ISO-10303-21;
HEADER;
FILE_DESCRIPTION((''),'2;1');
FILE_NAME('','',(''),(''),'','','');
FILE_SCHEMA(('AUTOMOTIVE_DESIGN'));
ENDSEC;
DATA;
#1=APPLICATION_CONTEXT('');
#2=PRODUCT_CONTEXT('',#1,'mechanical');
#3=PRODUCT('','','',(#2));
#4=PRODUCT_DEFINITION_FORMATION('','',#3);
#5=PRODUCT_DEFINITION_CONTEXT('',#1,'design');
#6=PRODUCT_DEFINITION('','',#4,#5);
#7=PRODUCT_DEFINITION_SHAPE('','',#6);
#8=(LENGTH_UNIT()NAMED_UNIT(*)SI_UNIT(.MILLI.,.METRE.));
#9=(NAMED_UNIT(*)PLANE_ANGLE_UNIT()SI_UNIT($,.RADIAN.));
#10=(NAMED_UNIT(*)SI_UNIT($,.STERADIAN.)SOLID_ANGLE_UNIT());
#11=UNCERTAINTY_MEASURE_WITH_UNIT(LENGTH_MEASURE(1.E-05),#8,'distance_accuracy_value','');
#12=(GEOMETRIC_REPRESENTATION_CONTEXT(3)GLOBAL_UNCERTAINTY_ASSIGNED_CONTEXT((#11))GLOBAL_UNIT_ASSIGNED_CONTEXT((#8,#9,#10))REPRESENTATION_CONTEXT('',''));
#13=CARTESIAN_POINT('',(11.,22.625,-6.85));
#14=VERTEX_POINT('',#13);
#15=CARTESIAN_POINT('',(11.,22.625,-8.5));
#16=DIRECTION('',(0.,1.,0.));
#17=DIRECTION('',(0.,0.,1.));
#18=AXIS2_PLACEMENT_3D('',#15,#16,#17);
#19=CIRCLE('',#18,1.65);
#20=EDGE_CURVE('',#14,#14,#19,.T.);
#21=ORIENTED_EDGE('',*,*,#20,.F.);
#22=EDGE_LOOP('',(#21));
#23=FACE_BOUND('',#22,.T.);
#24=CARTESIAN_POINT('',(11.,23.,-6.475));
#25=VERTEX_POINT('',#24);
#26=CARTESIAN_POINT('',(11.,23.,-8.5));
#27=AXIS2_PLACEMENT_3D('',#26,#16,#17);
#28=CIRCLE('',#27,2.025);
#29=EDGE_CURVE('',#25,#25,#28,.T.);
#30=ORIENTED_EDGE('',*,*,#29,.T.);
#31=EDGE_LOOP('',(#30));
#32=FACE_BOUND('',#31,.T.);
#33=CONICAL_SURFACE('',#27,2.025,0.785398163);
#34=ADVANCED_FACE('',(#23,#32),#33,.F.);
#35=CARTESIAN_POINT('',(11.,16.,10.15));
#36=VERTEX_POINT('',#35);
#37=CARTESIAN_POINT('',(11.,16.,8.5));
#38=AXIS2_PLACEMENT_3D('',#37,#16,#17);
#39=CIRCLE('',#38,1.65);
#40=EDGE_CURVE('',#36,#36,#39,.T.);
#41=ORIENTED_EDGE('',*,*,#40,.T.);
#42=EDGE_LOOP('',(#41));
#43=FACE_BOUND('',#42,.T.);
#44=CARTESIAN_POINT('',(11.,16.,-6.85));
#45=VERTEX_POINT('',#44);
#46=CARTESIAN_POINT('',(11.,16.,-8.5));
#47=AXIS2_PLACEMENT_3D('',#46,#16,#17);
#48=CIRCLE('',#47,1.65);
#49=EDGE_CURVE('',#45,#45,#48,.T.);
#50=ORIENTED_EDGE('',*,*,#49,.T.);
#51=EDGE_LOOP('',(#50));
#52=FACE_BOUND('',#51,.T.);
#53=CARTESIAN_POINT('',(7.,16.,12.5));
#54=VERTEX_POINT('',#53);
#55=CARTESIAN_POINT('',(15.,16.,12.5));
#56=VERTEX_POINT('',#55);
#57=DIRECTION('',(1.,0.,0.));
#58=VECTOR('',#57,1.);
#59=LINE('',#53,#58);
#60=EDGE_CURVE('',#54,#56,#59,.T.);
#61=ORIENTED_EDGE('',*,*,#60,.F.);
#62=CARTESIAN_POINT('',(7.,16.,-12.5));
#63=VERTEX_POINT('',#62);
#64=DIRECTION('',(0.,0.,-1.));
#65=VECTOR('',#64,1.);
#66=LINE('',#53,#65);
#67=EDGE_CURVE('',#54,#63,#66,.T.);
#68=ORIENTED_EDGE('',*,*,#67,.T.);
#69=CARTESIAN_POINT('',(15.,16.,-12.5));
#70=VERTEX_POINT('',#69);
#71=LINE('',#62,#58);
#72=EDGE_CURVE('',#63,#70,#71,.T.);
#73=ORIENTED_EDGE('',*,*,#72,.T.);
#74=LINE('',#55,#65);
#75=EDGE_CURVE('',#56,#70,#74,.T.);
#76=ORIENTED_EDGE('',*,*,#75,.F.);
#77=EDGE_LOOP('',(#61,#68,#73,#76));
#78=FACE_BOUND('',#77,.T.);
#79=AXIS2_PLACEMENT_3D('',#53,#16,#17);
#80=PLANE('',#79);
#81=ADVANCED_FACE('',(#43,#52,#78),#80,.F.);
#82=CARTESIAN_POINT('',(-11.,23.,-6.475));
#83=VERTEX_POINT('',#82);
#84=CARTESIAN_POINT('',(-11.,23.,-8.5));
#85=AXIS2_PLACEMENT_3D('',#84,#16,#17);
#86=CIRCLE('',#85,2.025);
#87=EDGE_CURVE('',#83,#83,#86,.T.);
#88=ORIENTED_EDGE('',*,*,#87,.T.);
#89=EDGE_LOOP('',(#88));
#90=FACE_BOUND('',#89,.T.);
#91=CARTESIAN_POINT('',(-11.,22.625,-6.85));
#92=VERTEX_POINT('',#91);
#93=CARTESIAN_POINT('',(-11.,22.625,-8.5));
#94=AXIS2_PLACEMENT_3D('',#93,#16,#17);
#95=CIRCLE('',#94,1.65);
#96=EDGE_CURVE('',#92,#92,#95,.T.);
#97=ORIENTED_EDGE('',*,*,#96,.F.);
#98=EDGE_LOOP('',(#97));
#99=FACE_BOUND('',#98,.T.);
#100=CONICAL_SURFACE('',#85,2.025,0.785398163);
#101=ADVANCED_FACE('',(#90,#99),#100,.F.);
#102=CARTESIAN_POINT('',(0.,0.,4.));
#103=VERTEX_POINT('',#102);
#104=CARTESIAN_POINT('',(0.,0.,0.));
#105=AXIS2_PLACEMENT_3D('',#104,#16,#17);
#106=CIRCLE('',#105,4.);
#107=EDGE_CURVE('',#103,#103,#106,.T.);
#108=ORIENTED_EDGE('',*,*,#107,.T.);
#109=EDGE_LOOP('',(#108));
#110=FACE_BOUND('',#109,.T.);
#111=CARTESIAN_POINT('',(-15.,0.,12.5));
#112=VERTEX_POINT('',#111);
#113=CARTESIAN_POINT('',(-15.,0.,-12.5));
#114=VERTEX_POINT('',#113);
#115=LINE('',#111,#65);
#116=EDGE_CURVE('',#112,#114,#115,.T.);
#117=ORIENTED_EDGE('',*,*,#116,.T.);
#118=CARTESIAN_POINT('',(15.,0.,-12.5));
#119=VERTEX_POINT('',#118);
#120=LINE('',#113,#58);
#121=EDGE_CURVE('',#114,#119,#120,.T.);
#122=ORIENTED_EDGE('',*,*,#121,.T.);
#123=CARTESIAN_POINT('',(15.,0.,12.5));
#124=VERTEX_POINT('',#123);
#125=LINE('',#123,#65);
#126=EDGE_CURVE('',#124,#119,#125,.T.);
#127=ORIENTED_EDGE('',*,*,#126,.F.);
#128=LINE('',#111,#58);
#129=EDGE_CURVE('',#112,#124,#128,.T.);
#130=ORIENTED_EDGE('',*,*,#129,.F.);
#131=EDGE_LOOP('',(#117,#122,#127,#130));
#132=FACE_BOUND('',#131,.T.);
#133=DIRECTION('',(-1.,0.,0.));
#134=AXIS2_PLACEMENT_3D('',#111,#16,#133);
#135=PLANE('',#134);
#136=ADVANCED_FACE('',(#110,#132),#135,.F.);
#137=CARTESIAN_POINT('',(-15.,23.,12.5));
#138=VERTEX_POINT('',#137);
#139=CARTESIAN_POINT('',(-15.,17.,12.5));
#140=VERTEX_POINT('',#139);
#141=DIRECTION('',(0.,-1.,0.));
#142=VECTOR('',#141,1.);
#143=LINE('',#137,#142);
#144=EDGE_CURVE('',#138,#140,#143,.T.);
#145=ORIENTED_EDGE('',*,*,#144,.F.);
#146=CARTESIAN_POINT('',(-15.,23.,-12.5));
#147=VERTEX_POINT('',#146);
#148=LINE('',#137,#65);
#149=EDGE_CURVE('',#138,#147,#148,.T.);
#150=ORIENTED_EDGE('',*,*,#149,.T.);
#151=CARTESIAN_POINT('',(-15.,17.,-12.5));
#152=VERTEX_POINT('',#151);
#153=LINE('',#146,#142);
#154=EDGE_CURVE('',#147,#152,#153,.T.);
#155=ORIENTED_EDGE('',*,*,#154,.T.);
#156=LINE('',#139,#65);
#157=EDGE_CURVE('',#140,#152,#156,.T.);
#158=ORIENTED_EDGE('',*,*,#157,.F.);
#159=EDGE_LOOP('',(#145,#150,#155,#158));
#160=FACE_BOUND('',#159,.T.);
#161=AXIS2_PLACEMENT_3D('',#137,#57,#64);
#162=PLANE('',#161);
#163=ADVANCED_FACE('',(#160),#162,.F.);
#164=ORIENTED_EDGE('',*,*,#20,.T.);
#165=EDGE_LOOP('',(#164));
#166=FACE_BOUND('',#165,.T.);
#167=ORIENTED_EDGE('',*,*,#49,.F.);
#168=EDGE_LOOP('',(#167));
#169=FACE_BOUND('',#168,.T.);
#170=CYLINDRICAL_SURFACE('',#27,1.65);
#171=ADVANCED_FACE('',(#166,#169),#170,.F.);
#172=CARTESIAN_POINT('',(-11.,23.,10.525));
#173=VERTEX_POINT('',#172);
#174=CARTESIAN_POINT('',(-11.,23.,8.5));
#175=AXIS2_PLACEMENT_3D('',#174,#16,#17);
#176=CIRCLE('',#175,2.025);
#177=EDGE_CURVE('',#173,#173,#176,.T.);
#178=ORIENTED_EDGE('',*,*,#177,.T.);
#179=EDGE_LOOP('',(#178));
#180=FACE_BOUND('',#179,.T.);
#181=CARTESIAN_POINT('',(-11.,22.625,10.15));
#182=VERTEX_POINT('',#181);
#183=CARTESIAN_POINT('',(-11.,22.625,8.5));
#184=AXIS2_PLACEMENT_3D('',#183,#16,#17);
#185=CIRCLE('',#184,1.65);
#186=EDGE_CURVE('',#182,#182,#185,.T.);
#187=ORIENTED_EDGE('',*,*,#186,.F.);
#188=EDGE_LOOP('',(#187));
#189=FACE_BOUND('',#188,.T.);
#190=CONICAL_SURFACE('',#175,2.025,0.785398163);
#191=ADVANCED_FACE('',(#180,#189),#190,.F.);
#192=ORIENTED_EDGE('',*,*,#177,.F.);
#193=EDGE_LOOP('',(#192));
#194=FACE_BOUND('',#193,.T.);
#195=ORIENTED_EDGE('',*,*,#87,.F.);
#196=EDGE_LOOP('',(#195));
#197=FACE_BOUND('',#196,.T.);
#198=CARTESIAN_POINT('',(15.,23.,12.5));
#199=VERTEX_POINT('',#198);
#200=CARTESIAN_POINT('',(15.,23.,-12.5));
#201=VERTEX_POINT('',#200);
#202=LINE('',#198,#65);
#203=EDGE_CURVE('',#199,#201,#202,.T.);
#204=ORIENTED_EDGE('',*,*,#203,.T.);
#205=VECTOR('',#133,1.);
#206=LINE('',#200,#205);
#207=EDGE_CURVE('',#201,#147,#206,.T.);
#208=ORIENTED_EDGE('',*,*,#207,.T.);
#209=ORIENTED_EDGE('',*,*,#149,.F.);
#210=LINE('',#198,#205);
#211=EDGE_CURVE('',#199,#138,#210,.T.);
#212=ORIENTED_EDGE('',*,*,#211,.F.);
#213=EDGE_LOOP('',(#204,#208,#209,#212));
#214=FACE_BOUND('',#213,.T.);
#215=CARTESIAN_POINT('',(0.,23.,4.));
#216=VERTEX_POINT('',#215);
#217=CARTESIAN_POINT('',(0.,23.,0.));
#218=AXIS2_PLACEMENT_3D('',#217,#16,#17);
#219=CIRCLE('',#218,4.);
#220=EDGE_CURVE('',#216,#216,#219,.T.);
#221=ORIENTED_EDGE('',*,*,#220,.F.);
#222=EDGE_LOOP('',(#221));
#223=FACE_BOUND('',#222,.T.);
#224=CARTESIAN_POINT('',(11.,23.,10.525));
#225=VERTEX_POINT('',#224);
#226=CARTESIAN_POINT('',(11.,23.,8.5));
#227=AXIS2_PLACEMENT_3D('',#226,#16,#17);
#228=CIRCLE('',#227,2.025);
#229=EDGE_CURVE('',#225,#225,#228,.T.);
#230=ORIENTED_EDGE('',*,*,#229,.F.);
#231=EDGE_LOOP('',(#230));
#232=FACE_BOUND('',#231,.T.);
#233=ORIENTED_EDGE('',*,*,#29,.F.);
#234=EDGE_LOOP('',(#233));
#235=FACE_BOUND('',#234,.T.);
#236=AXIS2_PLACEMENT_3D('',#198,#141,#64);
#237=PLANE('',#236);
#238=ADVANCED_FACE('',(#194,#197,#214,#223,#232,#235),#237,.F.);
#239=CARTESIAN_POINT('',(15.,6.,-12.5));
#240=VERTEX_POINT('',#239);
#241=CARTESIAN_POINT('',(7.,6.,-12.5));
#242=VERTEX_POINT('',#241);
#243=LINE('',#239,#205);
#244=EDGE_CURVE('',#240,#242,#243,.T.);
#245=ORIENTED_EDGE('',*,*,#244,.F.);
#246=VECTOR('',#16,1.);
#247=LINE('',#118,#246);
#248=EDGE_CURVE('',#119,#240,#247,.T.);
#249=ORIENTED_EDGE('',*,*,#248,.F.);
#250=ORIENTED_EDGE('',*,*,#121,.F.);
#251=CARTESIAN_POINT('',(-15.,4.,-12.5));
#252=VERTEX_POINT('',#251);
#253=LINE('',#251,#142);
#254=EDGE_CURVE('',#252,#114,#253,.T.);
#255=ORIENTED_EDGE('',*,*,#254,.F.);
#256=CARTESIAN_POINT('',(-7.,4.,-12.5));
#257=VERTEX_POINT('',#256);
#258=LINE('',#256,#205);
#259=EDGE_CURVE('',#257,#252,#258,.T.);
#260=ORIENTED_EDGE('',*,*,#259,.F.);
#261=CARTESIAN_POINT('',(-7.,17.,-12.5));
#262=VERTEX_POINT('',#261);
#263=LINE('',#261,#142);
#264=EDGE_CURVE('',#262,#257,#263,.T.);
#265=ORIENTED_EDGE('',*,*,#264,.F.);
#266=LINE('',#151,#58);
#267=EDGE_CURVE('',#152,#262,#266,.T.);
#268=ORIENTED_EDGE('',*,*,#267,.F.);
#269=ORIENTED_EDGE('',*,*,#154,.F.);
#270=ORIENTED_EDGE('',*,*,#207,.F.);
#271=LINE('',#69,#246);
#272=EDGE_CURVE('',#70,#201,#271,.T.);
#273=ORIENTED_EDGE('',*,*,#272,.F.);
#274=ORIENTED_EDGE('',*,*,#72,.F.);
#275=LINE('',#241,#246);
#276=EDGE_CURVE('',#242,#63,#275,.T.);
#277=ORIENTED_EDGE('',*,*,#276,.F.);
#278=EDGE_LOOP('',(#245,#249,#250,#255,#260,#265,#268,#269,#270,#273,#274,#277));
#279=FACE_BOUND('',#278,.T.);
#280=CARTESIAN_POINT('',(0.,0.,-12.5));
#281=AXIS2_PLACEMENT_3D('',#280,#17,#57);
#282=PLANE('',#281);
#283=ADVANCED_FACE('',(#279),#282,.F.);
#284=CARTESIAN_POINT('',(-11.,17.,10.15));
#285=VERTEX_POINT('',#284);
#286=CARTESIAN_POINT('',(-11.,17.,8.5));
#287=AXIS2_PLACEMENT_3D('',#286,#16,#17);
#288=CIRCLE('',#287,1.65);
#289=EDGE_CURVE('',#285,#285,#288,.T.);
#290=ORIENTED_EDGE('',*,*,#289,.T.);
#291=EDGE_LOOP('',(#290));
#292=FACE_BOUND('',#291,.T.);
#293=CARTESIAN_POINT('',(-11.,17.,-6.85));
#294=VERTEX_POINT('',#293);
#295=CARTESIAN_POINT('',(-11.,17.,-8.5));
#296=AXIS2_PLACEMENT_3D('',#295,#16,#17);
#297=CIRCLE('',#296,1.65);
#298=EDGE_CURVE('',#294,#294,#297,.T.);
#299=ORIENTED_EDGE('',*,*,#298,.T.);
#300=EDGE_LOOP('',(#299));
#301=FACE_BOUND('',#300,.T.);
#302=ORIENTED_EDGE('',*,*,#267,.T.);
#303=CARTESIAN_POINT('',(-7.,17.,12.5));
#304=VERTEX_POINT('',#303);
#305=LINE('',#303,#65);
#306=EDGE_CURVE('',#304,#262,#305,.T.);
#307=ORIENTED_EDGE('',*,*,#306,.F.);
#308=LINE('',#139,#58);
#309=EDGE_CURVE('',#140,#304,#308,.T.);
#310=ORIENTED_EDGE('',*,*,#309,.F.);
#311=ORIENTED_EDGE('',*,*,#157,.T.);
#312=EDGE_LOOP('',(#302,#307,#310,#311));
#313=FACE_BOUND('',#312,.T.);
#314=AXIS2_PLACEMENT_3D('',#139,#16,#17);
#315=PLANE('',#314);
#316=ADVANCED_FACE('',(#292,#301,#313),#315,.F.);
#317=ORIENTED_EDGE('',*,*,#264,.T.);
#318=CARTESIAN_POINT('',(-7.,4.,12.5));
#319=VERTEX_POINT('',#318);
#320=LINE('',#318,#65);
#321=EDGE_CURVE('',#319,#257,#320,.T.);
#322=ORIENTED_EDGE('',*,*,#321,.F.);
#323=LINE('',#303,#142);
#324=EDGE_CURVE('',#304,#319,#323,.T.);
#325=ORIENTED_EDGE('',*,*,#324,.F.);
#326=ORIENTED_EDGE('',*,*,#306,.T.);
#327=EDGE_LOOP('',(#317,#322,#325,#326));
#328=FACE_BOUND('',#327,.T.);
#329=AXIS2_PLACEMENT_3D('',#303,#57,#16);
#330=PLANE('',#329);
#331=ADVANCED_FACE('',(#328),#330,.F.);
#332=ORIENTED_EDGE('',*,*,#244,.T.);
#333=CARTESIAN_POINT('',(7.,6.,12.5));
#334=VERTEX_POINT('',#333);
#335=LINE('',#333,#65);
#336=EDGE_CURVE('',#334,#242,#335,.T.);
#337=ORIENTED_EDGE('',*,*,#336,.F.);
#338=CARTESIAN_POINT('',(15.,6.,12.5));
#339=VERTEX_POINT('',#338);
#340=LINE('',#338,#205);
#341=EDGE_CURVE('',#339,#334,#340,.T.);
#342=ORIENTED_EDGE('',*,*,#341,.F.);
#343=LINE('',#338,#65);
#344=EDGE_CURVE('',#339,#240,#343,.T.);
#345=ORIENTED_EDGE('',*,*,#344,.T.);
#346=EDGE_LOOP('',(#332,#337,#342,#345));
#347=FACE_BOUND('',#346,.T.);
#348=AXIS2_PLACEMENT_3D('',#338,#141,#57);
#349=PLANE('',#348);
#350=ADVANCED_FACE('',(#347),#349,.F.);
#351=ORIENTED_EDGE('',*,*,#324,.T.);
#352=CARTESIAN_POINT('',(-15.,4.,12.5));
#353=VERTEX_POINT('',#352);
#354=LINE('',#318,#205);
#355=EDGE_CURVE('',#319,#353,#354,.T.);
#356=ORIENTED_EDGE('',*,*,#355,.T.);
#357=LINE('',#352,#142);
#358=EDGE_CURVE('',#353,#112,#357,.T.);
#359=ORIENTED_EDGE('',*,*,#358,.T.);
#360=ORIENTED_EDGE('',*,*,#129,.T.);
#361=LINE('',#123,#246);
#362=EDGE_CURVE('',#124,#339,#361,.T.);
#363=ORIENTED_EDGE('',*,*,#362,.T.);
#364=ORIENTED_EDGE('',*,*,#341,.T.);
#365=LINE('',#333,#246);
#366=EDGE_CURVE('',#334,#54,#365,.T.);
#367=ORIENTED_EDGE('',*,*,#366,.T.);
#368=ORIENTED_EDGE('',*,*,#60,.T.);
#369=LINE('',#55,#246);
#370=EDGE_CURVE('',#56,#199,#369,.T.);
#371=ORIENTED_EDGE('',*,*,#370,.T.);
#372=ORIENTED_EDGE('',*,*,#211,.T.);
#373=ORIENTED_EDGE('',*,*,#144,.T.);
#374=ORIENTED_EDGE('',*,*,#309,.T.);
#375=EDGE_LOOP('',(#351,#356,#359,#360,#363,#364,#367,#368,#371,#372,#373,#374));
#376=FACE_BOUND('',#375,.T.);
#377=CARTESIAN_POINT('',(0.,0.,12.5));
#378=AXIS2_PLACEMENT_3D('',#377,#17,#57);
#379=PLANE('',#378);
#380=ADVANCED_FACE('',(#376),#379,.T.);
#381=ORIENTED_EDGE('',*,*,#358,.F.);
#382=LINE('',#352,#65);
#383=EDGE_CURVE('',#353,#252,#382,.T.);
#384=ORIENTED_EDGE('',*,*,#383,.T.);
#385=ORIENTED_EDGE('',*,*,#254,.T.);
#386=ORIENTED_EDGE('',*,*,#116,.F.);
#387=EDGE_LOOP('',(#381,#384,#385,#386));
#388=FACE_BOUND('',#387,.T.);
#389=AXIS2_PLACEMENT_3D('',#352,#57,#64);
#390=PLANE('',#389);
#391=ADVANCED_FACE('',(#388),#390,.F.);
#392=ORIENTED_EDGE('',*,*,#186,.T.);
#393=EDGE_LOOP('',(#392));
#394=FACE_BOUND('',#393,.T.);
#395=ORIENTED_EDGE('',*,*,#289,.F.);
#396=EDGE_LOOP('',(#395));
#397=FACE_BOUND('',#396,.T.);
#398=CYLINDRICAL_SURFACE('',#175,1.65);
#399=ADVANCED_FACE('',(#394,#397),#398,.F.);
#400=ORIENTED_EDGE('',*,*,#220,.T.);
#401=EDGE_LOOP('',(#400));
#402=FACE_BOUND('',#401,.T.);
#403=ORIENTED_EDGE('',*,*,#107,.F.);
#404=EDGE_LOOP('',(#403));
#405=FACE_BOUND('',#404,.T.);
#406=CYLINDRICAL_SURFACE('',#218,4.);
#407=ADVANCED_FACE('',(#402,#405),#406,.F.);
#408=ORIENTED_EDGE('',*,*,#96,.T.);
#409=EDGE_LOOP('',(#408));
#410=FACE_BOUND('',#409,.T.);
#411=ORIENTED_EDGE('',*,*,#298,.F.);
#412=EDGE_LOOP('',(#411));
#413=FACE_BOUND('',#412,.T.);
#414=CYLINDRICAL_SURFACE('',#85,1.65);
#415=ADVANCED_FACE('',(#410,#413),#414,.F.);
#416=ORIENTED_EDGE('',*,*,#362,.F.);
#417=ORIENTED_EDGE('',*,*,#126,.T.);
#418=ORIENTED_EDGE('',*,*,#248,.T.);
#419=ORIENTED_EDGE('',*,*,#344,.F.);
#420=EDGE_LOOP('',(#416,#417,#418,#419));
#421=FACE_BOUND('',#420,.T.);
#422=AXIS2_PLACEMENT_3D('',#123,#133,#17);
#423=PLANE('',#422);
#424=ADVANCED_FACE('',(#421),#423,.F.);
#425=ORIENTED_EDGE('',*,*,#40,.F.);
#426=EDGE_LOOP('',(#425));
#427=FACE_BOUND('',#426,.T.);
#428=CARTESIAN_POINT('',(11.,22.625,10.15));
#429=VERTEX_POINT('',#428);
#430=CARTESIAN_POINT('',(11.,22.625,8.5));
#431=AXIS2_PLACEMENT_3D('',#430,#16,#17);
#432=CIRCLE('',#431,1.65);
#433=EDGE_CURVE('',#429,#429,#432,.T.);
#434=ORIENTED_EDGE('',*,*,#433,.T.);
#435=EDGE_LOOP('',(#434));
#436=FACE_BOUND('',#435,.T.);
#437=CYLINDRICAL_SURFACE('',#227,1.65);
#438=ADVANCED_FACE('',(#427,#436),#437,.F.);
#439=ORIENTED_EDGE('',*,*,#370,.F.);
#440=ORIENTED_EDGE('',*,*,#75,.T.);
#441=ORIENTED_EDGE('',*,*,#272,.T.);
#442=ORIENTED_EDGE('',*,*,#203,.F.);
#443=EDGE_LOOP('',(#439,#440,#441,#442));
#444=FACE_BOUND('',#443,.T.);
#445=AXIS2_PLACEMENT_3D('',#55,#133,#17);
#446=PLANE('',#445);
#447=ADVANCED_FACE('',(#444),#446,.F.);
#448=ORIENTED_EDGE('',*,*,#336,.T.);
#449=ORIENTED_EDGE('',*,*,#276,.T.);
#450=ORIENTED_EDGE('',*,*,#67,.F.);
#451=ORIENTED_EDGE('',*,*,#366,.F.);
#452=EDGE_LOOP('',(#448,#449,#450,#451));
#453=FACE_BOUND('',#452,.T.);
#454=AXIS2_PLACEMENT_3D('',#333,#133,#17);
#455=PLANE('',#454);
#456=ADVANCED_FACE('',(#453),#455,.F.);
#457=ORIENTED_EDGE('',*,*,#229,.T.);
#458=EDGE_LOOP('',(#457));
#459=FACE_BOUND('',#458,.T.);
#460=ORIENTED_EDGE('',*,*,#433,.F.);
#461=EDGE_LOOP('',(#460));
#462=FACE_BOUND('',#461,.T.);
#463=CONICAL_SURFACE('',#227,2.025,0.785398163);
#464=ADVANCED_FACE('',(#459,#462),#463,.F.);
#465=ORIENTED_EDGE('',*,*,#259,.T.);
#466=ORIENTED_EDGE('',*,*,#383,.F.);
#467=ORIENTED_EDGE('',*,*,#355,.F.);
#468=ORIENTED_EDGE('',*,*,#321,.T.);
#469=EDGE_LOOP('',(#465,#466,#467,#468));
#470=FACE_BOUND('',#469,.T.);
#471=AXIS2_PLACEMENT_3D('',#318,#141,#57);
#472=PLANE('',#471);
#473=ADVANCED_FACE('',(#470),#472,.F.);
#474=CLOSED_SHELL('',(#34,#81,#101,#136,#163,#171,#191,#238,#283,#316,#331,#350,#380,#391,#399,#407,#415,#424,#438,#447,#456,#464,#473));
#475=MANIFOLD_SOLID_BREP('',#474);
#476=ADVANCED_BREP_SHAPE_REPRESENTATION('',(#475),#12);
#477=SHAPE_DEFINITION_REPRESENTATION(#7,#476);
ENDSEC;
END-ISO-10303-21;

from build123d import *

# Parameters (mm, degrees)
RESSALTO_EXTRUS_O1_DEPTH = 12.5
F_8_0MM_DOWEL_HOLE1_D    = 8


# Read off the part's stored shape, not the designer's step: Furo roscado de M4x0.71
with BuildPart() as part:
    # Esboço1 → Ressalto-extrusão1 (new, symmetric)
    with BuildSketch(Plane.XY):
        Polygon((-15, 0), (15, 0), (15, 6), (7, 6), (7, 16), (15, 16), (15, 23), (-15, 23), (-15, 17), (-7, 17), (-7, 4), (-15, 4), align=None)
    extrude(amount=RESSALTO_EXTRUS_O1_DEPTH, both=True)

    # Furo roscado de M4x0.71 outline → Furo roscado de M4x0.71 (revolve, cut)
    with BuildSketch(Plane(origin=(11, 0, -8.5), x_dir=(1, 0, 0), z_dir=(0, 0, 1))):
        Polygon((0, 16), (1.65, 16), (1.65, 22.625), (2.025, 23), (0, 23), align=None)
    furo_roscado_de_m4x0_71 = revolve(axis=Axis((11, 0, -8.5), (0, 1, 0)), mode=Mode.SUBTRACT)

    # Furo roscado de M4x0.71 2 outline → Furo roscado de M4x0.71 2 (revolve, cut)
    with BuildSketch(Plane(origin=(-11, 0, -8.5), x_dir=(1, 0, 0), z_dir=(0, 0, 1))):
        Polygon((0, 17), (1.65, 17), (1.65, 22.625), (2.025, 23), (0, 23), align=None)
    furo_roscado_de_m4x0_71_2 = revolve(axis=Axis((-11, 0, -8.5), (0, 1, 0)), mode=Mode.SUBTRACT)

    # Espelhar1: Furo roscado de M4x0.71, Furo roscado de M4x0.71 2 across plane
    add(furo_roscado_de_m4x0_71.mirror(Plane.XY), mode=Mode.SUBTRACT)
    add(furo_roscado_de_m4x0_71_2.mirror(Plane.XY), mode=Mode.SUBTRACT)

    # Ø8.0mm Dowel Hole1 (through all)
    with Locations(Plane(origin=(0, 23, 0), x_dir=(1, 0, 0), z_dir=(0, 1, 0))):
        with Locations((0, 0)):
            Hole(F_8_0MM_DOWEL_HOLE1_D / 2)


solid = part.part
